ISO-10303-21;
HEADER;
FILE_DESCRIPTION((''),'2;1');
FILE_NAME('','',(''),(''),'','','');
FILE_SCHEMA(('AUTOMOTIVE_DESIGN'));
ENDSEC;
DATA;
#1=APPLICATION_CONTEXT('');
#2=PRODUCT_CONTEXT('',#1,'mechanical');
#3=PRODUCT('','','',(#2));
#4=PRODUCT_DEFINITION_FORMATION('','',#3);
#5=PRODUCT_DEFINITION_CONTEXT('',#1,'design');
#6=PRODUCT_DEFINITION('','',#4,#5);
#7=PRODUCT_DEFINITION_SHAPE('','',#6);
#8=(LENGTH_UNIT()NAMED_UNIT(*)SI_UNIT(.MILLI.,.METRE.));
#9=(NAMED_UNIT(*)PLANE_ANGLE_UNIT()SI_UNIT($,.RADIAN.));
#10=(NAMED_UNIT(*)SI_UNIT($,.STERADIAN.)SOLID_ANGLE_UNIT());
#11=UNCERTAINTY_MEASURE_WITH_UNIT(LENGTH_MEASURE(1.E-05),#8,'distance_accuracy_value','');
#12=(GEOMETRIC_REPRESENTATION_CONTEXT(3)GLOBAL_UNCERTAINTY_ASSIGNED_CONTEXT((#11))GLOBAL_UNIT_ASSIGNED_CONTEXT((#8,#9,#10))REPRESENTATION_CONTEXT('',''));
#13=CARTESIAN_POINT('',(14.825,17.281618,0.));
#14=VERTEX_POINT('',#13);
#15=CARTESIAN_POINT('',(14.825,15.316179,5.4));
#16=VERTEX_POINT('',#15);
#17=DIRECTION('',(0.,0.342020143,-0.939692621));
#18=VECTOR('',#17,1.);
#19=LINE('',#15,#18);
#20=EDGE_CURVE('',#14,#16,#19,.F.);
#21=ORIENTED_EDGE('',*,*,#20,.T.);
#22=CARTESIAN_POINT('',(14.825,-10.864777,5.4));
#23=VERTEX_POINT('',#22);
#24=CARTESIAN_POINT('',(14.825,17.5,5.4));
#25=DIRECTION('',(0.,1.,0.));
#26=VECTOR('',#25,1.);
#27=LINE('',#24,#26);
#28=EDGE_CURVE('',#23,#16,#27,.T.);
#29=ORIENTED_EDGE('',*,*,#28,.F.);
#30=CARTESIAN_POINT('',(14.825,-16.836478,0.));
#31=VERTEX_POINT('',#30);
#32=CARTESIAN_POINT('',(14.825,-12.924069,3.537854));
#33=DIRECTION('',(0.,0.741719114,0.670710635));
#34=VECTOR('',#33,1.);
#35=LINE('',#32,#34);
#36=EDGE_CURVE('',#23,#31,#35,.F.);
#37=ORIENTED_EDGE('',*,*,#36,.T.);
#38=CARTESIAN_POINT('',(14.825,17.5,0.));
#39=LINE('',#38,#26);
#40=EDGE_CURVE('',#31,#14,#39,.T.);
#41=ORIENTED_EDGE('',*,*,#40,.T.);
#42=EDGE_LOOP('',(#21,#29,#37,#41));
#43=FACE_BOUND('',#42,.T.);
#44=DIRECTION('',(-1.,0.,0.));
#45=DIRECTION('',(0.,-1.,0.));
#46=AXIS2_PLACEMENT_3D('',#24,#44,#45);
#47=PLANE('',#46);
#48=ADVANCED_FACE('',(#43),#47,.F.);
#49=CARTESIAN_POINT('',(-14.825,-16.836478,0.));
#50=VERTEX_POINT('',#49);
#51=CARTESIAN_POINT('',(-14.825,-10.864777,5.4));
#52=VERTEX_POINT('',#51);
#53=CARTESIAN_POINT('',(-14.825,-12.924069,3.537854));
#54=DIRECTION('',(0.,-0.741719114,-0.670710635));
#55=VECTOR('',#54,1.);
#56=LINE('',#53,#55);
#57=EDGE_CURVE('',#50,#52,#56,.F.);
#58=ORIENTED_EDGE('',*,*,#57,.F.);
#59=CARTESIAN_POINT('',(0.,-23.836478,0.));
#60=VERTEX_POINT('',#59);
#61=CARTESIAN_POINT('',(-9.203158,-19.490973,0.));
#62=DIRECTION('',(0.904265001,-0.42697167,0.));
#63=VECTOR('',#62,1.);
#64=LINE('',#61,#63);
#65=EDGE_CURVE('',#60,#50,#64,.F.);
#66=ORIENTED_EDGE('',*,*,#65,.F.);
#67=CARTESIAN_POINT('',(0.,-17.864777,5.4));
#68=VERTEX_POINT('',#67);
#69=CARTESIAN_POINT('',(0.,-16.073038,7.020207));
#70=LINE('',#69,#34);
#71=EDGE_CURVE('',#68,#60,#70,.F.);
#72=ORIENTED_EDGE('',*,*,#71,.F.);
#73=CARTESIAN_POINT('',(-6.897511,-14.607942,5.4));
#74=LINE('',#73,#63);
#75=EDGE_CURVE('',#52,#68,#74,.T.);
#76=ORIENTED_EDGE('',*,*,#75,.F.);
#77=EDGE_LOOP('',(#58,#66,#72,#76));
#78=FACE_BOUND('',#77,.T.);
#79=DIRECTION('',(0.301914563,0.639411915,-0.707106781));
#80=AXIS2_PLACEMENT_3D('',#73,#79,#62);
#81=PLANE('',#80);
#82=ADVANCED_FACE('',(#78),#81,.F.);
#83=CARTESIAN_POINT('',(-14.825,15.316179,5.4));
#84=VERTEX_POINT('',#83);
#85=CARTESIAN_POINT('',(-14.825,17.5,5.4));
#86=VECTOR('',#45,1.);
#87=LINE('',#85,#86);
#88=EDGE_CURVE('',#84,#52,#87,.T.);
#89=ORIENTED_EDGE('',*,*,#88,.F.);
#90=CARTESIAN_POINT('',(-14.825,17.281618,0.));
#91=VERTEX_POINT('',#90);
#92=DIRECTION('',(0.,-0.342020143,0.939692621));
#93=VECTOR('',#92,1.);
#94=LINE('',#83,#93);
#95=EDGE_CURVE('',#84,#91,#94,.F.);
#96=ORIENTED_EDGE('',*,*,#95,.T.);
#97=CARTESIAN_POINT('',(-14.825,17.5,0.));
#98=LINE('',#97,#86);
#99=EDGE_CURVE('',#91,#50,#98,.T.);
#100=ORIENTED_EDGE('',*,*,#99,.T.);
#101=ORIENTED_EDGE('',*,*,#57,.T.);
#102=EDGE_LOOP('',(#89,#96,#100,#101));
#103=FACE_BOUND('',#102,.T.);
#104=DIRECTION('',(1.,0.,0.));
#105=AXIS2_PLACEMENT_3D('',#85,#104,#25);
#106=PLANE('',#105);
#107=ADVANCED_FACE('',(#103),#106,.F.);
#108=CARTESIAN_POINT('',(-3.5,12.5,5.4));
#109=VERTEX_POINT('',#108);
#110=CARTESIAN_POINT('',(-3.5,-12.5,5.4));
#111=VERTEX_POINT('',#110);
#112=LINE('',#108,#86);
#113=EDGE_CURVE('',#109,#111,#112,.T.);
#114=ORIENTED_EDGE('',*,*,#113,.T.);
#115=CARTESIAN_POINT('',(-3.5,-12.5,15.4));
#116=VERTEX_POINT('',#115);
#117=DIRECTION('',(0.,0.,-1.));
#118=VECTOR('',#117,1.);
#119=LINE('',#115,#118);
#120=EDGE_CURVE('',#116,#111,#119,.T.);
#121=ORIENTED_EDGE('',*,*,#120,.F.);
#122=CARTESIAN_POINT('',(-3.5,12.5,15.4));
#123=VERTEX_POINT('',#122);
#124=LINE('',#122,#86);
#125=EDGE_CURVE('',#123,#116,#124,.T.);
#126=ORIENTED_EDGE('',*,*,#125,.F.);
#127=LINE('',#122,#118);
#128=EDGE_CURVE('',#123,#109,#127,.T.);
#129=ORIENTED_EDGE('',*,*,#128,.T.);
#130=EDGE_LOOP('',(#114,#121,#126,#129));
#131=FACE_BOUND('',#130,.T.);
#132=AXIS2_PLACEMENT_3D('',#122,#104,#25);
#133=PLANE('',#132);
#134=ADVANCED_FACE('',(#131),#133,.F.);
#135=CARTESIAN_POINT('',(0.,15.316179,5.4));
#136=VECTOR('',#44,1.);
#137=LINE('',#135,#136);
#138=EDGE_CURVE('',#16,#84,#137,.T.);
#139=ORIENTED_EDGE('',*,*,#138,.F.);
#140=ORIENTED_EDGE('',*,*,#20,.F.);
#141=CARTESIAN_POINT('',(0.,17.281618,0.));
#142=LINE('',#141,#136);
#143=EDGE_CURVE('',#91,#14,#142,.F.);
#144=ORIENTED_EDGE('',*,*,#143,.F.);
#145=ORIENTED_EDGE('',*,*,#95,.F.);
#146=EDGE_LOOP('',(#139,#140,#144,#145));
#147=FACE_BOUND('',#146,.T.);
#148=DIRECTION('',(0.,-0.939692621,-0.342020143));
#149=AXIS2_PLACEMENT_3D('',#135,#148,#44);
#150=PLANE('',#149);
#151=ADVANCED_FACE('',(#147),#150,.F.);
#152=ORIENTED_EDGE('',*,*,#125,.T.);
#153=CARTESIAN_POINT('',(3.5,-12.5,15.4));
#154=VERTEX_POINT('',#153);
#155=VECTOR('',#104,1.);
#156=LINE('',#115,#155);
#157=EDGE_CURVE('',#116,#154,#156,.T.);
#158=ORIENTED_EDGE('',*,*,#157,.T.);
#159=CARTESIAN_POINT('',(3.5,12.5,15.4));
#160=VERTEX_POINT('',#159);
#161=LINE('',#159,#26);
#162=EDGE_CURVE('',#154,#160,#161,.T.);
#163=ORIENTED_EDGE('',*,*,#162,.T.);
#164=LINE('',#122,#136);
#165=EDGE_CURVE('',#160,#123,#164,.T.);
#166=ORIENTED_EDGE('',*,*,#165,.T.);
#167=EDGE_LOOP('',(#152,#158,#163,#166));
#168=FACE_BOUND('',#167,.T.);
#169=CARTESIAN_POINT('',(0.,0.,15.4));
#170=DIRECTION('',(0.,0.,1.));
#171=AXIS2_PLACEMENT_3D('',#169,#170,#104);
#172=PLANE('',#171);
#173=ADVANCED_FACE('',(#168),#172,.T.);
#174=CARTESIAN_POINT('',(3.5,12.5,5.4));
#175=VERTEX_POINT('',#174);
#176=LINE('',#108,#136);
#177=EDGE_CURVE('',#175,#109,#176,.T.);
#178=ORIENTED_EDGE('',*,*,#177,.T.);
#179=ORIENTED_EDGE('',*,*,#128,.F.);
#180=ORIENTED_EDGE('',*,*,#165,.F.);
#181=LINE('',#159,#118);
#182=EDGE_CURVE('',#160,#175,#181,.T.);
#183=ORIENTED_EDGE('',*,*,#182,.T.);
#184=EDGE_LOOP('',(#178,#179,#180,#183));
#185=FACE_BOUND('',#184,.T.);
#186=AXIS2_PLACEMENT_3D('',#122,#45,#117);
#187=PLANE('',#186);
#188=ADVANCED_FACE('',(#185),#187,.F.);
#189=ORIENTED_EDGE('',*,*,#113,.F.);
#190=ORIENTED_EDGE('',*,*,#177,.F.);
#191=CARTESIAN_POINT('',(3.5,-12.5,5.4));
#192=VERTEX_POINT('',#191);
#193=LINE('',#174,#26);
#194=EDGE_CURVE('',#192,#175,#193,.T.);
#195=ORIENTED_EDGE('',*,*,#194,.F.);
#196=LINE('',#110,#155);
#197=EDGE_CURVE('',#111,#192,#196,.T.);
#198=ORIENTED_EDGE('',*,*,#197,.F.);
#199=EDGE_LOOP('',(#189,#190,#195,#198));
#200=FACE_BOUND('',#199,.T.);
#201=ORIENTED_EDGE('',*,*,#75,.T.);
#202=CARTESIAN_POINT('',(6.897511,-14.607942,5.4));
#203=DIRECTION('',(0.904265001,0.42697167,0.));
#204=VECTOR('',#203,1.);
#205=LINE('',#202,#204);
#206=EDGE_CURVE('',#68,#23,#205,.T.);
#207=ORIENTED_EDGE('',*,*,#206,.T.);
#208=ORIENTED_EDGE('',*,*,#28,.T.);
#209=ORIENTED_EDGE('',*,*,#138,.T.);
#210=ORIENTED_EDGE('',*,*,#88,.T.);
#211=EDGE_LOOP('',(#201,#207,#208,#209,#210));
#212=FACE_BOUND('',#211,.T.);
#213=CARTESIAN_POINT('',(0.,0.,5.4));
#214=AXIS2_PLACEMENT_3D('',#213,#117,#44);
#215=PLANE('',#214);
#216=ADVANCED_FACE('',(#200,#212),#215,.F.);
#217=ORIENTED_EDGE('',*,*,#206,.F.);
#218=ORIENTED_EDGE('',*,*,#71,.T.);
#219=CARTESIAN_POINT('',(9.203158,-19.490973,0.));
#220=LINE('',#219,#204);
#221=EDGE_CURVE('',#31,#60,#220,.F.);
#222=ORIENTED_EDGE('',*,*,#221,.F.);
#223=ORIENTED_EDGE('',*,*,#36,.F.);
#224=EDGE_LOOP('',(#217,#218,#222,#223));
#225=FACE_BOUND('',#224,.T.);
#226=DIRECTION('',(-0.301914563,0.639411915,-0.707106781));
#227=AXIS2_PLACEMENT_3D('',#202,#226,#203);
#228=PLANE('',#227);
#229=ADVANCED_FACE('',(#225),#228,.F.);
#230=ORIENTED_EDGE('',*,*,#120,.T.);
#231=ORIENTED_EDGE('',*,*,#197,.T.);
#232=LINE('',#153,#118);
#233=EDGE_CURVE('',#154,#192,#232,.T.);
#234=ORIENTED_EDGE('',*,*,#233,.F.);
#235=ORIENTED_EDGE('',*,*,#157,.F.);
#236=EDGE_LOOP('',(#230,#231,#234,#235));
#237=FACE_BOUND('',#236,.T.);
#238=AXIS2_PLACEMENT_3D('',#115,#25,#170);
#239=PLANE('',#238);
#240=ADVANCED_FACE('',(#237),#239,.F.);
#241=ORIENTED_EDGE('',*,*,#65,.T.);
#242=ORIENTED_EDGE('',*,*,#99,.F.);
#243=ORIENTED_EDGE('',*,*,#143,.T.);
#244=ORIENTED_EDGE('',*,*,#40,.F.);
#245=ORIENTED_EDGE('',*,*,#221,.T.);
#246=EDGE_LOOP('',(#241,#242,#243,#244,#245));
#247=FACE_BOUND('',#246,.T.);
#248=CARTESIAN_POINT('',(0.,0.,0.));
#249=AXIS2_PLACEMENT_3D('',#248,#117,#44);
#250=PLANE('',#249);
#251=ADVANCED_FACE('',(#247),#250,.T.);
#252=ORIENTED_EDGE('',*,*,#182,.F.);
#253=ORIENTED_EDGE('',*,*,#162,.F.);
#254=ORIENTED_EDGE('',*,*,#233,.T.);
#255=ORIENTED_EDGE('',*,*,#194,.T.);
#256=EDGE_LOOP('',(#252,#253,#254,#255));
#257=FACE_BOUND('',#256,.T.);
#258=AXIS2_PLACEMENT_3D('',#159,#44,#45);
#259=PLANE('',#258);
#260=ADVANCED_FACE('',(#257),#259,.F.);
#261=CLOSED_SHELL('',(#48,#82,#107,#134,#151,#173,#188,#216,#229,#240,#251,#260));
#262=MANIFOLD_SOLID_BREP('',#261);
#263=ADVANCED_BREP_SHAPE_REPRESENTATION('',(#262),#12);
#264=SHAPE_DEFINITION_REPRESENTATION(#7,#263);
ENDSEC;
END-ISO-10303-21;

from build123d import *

# Parameters (mm, degrees)
RESSALTO_EXTRUS_O1_DEPTH = 5.4
CHANFRO1_SIZE            = 6
ESBO_O2_W                = 7
ESBO_O2_H                = 25
RESSALTO_EXTRUS_O2_DEPTH = 10
CHANFRO2_SIZE            = 6
CHANFRO2_SIZE_2          = 2.183821406


with BuildPart() as part:
    # Esboço1 → Ressalto-extrusão1 (new body)
    with BuildSketch(Plane.XY):
        Polygon((-14.825, -17.5), (0, -24.5), (14.825, -17.5), (14.825, 17.5), (-14.825, 17.5), align=None)
    extrude(amount=RESSALTO_EXTRUS_O1_DEPTH)

    # Chanfro1
    # the kernel refuses this chamfer: 6 mm, written as the material it takes off along each edge
    with BuildSketch(Plane(origin=(-13.952897525, -31.088214683, 5.4), x_dir=(0.01173996035917391, -0.024863558903536174, -0.9996219169112968), z_dir=(0.9042650014643773, 0.4269716701686773, 0)), Plane(origin=(-28.777897525, -10.911785317, 5.4), x_dir=(-0.01173996035917391, -0.024863558903536174, -0.9996219169112968), z_dir=(0.9042650014643773, -0.4269716701686773, 0))) as chanfro1_piece_1:
        Polygon((CHANFRO1_SIZE * 0.999621916911, CHANFRO1_SIZE * 0.0274958766106), (-CHANFRO1_SIZE * 0.0274958766106, CHANFRO1_SIZE * 0.999621916911), (0, 0), align=None)
    extrude(amount=47.254726193, mode=Mode.SUBTRACT)

    # Esboço2 → Ressalto-extrusão2 (add)
    with BuildSketch(Plane.XY.offset(5.4)):
        Rectangle(ESBO_O2_W, ESBO_O2_H)
    extrude(amount=RESSALTO_EXTRUS_O2_DEPTH)

    # Chanfro2
    # the kernel refuses this chamfer: 6, 2.183821406 mm, written as the material it takes off along each edge
    with BuildSketch(Plane(origin=(30.390168395, 17.5, 5.4), x_dir=(0, 0.013184058198645722, -0.9999130865277315), z_dir=(-1, 0, 0))) as chanfro2_piece_1:
        Polygon((CHANFRO2_SIZE * 0.999913086528, CHANFRO2_SIZE * 0.0131840581986), (-CHANFRO2_SIZE_2 * 0.0131840581962, CHANFRO2_SIZE_2 * 0.999913086343), (0, 0), align=None)
    extrude(amount=60.780336791, mode=Mode.SUBTRACT)


solid = part.part
